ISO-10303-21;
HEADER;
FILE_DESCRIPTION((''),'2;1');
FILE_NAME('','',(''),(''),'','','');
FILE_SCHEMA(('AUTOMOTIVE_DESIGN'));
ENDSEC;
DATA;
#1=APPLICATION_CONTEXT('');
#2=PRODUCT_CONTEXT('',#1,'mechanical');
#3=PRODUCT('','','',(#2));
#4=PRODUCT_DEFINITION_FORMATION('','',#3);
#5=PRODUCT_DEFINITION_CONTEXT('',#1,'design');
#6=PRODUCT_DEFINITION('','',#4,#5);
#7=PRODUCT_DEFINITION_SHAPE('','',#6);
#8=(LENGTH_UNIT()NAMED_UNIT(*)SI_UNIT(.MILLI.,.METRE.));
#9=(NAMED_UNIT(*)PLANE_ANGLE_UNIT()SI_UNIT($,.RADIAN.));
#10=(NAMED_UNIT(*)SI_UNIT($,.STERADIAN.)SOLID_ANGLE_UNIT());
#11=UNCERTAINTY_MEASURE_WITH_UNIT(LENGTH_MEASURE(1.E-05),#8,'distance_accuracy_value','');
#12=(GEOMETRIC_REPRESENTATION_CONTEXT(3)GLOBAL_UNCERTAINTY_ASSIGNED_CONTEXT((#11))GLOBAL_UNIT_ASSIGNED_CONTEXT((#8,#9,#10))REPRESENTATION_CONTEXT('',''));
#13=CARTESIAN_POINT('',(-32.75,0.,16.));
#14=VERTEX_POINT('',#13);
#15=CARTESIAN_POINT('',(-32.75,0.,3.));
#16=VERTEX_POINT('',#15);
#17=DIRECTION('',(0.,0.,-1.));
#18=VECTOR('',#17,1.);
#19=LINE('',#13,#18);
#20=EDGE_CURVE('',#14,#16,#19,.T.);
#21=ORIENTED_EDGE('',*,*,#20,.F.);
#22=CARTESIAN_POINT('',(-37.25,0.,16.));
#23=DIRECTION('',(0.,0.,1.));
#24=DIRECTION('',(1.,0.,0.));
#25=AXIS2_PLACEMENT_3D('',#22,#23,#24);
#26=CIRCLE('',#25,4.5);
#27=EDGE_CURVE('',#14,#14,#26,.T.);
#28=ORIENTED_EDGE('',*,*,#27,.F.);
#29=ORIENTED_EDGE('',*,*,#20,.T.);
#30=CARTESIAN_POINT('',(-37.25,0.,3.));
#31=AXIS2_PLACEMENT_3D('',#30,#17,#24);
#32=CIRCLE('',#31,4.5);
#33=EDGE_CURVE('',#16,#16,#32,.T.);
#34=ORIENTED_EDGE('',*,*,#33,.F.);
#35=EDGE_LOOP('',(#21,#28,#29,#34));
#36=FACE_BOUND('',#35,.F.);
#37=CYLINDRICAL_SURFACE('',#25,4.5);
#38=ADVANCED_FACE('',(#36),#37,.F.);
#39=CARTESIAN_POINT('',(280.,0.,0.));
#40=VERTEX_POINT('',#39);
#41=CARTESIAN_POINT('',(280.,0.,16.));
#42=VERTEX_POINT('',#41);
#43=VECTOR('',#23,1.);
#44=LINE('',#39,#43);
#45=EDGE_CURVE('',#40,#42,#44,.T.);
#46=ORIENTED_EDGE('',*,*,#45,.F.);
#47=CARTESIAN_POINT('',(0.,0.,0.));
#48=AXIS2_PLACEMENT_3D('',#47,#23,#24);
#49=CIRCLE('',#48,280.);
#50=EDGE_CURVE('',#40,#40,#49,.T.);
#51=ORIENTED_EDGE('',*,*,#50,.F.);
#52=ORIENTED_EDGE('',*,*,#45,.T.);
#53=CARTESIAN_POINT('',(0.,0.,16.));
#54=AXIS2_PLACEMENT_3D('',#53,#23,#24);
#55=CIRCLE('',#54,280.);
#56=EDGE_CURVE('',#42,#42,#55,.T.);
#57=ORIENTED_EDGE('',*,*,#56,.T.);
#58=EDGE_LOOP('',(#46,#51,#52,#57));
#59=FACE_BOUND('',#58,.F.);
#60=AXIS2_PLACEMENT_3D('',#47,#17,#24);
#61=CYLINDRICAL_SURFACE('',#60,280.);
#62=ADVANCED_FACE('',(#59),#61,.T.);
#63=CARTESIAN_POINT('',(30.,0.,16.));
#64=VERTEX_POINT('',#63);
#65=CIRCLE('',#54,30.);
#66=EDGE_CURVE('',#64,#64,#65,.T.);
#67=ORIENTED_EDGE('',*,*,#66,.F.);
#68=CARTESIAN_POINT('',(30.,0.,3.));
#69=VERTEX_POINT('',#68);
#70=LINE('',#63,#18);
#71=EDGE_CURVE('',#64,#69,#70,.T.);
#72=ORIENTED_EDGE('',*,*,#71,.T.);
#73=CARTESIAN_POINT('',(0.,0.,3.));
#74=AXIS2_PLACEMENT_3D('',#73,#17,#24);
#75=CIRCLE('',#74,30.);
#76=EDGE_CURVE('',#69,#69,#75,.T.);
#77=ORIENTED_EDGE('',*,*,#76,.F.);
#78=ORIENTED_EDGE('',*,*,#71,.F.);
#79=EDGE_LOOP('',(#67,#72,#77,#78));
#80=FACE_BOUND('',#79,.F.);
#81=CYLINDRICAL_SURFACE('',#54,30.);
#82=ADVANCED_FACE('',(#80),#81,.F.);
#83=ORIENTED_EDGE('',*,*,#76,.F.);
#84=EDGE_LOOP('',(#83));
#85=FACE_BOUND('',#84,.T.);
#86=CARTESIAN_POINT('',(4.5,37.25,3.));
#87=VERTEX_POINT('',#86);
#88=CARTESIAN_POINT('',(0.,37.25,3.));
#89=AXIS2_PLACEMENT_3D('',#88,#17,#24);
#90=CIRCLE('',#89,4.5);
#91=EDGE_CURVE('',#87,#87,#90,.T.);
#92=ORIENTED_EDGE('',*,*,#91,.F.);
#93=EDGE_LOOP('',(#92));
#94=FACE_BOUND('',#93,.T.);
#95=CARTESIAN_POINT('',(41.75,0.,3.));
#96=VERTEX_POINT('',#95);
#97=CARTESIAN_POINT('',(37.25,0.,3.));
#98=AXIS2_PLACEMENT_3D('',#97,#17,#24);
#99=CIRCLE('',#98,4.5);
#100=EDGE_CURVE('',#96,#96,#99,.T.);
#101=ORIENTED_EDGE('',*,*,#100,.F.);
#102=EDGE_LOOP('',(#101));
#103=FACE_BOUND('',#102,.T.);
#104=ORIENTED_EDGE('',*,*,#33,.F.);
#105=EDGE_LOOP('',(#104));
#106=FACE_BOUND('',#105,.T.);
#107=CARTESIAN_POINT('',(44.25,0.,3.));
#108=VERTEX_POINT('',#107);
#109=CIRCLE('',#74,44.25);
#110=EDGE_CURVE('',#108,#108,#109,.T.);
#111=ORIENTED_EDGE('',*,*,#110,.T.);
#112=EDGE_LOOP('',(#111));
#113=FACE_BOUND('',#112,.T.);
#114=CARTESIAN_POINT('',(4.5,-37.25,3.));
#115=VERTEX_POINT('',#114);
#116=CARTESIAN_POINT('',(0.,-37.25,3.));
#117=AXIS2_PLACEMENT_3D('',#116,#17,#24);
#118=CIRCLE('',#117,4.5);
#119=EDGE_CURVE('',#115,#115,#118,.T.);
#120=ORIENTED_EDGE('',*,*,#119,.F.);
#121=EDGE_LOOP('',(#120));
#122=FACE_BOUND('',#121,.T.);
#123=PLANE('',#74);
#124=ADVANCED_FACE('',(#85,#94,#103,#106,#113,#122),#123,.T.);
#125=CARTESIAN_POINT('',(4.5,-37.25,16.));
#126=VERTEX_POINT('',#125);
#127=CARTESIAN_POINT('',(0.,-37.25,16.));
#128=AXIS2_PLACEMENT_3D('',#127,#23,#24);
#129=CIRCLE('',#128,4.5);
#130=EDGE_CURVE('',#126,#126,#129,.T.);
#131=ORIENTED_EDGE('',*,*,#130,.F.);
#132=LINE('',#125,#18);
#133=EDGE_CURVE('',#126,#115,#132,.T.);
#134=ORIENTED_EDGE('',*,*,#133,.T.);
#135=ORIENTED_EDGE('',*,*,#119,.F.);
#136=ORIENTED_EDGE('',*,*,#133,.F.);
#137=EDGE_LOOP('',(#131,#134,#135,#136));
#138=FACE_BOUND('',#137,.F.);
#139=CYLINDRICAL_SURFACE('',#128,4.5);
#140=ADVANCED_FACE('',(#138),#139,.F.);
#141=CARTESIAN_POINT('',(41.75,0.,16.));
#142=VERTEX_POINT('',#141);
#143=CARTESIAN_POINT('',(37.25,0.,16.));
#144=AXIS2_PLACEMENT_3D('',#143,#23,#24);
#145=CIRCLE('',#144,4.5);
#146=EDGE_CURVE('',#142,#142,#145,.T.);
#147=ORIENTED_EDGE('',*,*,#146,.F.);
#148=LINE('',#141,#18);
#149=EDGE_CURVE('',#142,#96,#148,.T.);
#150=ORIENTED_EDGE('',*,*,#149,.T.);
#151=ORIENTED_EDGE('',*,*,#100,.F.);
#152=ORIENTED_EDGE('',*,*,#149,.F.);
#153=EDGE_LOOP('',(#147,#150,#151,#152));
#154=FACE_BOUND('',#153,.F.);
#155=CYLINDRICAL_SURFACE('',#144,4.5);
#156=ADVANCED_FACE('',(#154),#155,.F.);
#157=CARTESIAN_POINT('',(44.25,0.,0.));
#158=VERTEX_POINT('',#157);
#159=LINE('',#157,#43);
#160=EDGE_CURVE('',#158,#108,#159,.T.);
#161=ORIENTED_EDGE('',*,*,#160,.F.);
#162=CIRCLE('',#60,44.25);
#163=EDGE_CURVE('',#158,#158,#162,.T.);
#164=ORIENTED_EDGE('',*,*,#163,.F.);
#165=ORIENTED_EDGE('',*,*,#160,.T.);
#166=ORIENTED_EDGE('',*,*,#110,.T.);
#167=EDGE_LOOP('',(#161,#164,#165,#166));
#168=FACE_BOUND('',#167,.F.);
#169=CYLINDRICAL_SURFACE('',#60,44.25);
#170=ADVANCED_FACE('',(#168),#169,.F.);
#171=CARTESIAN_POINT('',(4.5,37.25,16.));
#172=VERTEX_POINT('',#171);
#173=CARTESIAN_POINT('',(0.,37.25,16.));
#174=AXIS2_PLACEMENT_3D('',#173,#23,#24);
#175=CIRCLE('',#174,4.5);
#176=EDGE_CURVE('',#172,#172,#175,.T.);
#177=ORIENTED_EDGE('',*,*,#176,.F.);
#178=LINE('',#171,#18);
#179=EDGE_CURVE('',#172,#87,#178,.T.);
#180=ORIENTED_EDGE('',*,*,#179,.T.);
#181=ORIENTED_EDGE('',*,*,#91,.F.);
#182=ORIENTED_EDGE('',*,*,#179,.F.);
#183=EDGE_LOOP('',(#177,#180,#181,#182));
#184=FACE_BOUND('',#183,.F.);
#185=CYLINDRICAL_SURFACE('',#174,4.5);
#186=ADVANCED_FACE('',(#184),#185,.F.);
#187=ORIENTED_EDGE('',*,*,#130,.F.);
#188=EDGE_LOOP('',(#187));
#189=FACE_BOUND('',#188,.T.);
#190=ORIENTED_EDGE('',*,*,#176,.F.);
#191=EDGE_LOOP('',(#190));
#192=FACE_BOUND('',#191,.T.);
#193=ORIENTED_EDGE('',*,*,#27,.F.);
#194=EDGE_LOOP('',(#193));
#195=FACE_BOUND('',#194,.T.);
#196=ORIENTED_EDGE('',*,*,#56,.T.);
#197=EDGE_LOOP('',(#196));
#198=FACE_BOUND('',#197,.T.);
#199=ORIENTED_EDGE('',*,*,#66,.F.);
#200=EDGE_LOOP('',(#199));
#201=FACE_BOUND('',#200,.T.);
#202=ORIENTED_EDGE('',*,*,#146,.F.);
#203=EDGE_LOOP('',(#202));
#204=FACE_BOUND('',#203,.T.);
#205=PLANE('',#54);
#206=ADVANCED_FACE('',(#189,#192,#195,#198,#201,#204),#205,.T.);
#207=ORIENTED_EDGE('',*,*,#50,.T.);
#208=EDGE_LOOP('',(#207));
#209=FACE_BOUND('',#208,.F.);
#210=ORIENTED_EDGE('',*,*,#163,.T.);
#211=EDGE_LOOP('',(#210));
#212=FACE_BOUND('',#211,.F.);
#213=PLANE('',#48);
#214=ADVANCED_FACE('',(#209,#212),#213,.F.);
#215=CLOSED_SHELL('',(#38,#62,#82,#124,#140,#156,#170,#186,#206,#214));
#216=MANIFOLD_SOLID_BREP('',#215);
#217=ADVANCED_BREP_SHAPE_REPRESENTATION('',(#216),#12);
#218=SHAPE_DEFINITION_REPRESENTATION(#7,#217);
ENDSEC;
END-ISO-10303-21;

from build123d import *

# Parameters (mm, degrees)
F0_R     = 280
F1_DEPTH = 16
F2_R     = 30
F2_R_2   = 4.5
F3_DEPTH = 25
F4_R     = 44.25
F4_R_2   = 4.5
F4_R_3   = 30
F5_DEPTH = 3


# Not quite as in the source:
# - a feature names something its author has since deleted; it is built from what else it names


with BuildPart() as f1:
    # F0 (on Top) → F1 (new body)
    with BuildSketch(Plane.XY):
        Circle(F0_R)
    extrude(amount=F1_DEPTH)

    # F2 (on face) → F3 (cut)
    with BuildSketch(Plane.XY.offset(16)):
        Circle(F2_R)
        with Locations((-37.25, 0)):
            Circle(F2_R_2)
        with Locations((0, 37.25)):
            Circle(F2_R_2)
        with Locations((37.25, 0)):
            Circle(F2_R_2)
        with Locations((0, -37.25)):
            Circle(F2_R_2)
    extrude(amount=-F3_DEPTH, mode=Mode.SUBTRACT)

    # F4 (on face) → F5 (cut)
    with BuildSketch(Plane(origin=(0, 0, 0), x_dir=(1, 0, 0), z_dir=(0, 0, -1))):
        Circle(F4_R)
        with Locations((0, -37.25)):
            Circle(F4_R_2, mode=Mode.SUBTRACT)
        with Locations((-37.25, 0)):
            Circle(F4_R_2, mode=Mode.SUBTRACT)
        Circle(F4_R_3, mode=Mode.SUBTRACT)
        with Locations((37.25, 0)):
            Circle(F4_R_2, mode=Mode.SUBTRACT)
        with Locations((0, 37.25)):
            Circle(F4_R_2, mode=Mode.SUBTRACT)
    extrude(amount=-F5_DEPTH, mode=Mode.SUBTRACT)


solid = f1.part
